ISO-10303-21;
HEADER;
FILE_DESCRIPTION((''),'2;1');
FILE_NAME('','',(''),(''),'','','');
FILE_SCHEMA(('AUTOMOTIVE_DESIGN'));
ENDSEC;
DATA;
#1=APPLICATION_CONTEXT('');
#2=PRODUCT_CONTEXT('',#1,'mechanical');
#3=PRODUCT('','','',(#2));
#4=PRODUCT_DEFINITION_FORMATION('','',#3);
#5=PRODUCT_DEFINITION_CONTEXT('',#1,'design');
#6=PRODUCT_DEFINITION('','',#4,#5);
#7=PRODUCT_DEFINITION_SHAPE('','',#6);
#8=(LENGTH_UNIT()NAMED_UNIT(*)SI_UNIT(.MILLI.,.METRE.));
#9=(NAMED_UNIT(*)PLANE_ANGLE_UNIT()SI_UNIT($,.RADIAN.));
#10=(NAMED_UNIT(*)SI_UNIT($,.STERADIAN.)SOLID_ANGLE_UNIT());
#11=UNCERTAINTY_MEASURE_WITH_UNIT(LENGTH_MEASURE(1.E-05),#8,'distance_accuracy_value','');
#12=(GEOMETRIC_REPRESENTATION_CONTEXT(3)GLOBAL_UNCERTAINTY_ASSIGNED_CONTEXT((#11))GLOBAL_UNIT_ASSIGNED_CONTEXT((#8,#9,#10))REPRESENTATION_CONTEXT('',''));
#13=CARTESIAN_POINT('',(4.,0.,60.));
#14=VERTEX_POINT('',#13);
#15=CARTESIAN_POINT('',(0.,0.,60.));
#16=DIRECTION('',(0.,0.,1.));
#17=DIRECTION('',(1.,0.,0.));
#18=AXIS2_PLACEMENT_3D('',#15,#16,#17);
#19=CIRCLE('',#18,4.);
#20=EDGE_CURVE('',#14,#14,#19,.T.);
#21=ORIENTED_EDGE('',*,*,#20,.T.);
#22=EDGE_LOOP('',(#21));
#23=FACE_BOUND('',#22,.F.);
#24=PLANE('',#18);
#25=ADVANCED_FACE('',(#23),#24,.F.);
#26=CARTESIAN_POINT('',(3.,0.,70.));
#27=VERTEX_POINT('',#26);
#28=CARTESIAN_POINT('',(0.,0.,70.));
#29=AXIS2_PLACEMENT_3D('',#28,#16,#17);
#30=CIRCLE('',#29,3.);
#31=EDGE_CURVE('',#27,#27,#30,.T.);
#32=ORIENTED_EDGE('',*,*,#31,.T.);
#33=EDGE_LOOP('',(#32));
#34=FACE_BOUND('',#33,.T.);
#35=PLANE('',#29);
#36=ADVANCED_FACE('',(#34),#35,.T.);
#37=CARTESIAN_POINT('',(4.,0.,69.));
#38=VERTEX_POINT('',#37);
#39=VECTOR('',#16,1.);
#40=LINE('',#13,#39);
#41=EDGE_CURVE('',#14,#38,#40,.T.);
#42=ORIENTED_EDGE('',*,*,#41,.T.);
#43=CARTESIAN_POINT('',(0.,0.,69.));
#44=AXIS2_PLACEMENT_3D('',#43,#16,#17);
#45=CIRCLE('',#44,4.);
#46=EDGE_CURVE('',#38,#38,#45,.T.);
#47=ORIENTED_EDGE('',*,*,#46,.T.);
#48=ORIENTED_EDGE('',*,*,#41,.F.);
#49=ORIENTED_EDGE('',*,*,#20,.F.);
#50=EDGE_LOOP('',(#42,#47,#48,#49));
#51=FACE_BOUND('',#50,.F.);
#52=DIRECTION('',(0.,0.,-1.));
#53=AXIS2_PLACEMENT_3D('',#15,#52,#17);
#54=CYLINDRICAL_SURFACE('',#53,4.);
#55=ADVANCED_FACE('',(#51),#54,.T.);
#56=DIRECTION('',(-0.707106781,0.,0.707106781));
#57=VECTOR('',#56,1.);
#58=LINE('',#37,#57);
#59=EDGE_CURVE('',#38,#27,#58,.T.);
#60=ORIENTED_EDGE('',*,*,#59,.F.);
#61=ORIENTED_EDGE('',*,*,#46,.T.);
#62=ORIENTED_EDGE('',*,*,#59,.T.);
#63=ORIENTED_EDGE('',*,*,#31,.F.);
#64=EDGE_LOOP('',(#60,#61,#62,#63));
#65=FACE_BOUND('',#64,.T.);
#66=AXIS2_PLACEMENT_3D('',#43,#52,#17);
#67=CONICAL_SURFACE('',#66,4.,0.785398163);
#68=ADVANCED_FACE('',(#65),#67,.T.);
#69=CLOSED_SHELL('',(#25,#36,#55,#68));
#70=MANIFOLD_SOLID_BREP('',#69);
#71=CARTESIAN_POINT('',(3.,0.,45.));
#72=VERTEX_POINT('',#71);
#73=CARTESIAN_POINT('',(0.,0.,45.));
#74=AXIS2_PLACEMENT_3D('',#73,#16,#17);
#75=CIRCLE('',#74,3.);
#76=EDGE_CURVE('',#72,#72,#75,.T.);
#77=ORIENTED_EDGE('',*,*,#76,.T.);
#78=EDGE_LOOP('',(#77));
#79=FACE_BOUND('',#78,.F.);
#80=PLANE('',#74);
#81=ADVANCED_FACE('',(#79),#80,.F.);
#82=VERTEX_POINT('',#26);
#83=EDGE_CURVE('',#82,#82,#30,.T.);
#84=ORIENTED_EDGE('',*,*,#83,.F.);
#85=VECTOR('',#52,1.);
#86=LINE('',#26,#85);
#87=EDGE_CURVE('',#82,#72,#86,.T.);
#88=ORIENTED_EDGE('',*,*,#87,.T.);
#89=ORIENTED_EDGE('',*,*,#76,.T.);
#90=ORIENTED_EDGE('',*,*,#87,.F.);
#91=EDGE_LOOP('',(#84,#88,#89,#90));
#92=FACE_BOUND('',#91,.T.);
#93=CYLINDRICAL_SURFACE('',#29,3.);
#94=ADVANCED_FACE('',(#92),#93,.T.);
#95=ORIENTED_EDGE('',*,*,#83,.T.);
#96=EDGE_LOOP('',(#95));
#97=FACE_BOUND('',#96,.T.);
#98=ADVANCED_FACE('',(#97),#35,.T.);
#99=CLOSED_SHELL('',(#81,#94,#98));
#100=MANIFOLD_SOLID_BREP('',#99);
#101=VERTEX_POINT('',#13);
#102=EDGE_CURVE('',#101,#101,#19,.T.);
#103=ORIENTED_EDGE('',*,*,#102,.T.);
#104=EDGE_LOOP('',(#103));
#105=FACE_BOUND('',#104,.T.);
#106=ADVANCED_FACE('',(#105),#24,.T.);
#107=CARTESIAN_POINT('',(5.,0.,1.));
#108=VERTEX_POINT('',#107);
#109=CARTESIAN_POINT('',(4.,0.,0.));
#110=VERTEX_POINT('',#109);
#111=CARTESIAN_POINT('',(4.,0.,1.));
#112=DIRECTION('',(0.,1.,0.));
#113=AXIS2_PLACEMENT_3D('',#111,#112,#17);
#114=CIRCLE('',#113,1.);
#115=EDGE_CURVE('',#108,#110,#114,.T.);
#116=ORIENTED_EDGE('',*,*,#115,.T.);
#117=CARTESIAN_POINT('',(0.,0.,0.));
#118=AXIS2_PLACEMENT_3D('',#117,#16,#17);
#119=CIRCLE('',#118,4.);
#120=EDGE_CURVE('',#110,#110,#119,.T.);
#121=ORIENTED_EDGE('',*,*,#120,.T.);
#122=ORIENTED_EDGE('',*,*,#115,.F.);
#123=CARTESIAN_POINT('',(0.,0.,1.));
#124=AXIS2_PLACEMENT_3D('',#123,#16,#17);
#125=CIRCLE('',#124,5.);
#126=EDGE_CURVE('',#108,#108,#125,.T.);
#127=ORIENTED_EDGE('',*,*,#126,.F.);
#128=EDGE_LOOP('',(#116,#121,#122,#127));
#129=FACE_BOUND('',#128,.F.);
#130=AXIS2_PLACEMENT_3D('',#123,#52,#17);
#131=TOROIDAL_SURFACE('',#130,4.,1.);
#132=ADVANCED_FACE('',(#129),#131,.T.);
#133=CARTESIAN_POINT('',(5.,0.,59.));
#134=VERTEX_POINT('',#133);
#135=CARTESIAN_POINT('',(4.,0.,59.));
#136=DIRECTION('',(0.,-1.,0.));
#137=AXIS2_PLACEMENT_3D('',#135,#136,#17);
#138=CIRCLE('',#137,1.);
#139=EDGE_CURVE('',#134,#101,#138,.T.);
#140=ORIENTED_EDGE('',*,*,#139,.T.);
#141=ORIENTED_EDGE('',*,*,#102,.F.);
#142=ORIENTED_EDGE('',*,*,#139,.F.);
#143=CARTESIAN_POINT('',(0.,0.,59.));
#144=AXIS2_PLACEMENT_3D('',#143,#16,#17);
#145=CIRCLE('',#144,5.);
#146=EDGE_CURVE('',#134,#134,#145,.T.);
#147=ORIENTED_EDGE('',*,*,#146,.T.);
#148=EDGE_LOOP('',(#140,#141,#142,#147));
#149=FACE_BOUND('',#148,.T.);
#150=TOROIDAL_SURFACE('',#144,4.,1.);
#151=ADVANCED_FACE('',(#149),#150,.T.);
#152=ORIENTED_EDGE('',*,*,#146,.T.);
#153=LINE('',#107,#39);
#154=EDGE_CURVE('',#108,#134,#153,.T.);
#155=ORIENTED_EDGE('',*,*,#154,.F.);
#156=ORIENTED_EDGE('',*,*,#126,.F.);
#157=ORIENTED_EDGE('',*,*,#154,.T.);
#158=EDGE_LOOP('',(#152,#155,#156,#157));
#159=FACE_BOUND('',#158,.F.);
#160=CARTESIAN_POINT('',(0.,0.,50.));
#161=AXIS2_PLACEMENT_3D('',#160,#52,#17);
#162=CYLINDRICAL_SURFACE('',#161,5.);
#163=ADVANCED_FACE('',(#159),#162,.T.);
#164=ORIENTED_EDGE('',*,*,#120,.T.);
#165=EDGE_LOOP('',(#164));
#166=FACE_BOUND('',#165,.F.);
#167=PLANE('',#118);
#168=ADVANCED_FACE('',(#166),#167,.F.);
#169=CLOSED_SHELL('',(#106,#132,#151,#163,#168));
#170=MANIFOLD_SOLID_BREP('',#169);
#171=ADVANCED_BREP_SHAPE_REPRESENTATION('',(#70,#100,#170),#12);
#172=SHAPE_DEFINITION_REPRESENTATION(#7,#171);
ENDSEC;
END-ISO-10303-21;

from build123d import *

# Parameters (mm, degrees)
F0_R     = 5
F1_DEPTH = 50
F2_R     = 1
F3_DEPTH = 10
F4_R     = 1
F5_R     = 4
F6_DEPTH = 10
F7_SIZE  = 1
F8_DEPTH = 25


with BuildPart() as f1:
    # F0 (on Top) → F1 (new body)
    with BuildSketch(Plane.XY):
        Circle(F0_R)
    extrude(amount=F1_DEPTH)

    # F2
    f2_edges = [f1.edges().sort_by_distance(p)[0] for p in [
        (-5, 0, 0),
    ]]
    fillet(f2_edges, radius=F2_R)

    # F3 (add): a face of the model
    f3_faces = [f1.faces().sort_by_distance(p)[0] for p in [
        (0, 0, 50),
    ]]
    extrude(f3_faces, amount=F3_DEPTH)

    # F4
    f4_edges = [f1.edges().sort_by_distance(p)[0] for p in [
        (-5, 0, 60),
    ]]
    fillet(f4_edges, radius=F4_R)


with BuildPart() as f6:
    # F5 (on face) → F6 (new body)
    with BuildSketch(Plane.XY.offset(60)):
        Circle(F5_R)
    extrude(amount=F6_DEPTH)

    # F7
    f7_edges = [f6.edges().sort_by_distance(p)[0] for p in [
        (-4, 0, 70),
    ]]
    chamfer(f7_edges, length=F7_SIZE)


with BuildPart() as f8:
    # F8 (new): a face of the model
    f8_faces = [f6.part.faces().sort_by_distance(p)[0] for p in [
        (0, 0, 70),
    ]]
    extrude(f8_faces, amount=-F8_DEPTH)


solid = Compound([f1.part, f6.part, f8.part])
